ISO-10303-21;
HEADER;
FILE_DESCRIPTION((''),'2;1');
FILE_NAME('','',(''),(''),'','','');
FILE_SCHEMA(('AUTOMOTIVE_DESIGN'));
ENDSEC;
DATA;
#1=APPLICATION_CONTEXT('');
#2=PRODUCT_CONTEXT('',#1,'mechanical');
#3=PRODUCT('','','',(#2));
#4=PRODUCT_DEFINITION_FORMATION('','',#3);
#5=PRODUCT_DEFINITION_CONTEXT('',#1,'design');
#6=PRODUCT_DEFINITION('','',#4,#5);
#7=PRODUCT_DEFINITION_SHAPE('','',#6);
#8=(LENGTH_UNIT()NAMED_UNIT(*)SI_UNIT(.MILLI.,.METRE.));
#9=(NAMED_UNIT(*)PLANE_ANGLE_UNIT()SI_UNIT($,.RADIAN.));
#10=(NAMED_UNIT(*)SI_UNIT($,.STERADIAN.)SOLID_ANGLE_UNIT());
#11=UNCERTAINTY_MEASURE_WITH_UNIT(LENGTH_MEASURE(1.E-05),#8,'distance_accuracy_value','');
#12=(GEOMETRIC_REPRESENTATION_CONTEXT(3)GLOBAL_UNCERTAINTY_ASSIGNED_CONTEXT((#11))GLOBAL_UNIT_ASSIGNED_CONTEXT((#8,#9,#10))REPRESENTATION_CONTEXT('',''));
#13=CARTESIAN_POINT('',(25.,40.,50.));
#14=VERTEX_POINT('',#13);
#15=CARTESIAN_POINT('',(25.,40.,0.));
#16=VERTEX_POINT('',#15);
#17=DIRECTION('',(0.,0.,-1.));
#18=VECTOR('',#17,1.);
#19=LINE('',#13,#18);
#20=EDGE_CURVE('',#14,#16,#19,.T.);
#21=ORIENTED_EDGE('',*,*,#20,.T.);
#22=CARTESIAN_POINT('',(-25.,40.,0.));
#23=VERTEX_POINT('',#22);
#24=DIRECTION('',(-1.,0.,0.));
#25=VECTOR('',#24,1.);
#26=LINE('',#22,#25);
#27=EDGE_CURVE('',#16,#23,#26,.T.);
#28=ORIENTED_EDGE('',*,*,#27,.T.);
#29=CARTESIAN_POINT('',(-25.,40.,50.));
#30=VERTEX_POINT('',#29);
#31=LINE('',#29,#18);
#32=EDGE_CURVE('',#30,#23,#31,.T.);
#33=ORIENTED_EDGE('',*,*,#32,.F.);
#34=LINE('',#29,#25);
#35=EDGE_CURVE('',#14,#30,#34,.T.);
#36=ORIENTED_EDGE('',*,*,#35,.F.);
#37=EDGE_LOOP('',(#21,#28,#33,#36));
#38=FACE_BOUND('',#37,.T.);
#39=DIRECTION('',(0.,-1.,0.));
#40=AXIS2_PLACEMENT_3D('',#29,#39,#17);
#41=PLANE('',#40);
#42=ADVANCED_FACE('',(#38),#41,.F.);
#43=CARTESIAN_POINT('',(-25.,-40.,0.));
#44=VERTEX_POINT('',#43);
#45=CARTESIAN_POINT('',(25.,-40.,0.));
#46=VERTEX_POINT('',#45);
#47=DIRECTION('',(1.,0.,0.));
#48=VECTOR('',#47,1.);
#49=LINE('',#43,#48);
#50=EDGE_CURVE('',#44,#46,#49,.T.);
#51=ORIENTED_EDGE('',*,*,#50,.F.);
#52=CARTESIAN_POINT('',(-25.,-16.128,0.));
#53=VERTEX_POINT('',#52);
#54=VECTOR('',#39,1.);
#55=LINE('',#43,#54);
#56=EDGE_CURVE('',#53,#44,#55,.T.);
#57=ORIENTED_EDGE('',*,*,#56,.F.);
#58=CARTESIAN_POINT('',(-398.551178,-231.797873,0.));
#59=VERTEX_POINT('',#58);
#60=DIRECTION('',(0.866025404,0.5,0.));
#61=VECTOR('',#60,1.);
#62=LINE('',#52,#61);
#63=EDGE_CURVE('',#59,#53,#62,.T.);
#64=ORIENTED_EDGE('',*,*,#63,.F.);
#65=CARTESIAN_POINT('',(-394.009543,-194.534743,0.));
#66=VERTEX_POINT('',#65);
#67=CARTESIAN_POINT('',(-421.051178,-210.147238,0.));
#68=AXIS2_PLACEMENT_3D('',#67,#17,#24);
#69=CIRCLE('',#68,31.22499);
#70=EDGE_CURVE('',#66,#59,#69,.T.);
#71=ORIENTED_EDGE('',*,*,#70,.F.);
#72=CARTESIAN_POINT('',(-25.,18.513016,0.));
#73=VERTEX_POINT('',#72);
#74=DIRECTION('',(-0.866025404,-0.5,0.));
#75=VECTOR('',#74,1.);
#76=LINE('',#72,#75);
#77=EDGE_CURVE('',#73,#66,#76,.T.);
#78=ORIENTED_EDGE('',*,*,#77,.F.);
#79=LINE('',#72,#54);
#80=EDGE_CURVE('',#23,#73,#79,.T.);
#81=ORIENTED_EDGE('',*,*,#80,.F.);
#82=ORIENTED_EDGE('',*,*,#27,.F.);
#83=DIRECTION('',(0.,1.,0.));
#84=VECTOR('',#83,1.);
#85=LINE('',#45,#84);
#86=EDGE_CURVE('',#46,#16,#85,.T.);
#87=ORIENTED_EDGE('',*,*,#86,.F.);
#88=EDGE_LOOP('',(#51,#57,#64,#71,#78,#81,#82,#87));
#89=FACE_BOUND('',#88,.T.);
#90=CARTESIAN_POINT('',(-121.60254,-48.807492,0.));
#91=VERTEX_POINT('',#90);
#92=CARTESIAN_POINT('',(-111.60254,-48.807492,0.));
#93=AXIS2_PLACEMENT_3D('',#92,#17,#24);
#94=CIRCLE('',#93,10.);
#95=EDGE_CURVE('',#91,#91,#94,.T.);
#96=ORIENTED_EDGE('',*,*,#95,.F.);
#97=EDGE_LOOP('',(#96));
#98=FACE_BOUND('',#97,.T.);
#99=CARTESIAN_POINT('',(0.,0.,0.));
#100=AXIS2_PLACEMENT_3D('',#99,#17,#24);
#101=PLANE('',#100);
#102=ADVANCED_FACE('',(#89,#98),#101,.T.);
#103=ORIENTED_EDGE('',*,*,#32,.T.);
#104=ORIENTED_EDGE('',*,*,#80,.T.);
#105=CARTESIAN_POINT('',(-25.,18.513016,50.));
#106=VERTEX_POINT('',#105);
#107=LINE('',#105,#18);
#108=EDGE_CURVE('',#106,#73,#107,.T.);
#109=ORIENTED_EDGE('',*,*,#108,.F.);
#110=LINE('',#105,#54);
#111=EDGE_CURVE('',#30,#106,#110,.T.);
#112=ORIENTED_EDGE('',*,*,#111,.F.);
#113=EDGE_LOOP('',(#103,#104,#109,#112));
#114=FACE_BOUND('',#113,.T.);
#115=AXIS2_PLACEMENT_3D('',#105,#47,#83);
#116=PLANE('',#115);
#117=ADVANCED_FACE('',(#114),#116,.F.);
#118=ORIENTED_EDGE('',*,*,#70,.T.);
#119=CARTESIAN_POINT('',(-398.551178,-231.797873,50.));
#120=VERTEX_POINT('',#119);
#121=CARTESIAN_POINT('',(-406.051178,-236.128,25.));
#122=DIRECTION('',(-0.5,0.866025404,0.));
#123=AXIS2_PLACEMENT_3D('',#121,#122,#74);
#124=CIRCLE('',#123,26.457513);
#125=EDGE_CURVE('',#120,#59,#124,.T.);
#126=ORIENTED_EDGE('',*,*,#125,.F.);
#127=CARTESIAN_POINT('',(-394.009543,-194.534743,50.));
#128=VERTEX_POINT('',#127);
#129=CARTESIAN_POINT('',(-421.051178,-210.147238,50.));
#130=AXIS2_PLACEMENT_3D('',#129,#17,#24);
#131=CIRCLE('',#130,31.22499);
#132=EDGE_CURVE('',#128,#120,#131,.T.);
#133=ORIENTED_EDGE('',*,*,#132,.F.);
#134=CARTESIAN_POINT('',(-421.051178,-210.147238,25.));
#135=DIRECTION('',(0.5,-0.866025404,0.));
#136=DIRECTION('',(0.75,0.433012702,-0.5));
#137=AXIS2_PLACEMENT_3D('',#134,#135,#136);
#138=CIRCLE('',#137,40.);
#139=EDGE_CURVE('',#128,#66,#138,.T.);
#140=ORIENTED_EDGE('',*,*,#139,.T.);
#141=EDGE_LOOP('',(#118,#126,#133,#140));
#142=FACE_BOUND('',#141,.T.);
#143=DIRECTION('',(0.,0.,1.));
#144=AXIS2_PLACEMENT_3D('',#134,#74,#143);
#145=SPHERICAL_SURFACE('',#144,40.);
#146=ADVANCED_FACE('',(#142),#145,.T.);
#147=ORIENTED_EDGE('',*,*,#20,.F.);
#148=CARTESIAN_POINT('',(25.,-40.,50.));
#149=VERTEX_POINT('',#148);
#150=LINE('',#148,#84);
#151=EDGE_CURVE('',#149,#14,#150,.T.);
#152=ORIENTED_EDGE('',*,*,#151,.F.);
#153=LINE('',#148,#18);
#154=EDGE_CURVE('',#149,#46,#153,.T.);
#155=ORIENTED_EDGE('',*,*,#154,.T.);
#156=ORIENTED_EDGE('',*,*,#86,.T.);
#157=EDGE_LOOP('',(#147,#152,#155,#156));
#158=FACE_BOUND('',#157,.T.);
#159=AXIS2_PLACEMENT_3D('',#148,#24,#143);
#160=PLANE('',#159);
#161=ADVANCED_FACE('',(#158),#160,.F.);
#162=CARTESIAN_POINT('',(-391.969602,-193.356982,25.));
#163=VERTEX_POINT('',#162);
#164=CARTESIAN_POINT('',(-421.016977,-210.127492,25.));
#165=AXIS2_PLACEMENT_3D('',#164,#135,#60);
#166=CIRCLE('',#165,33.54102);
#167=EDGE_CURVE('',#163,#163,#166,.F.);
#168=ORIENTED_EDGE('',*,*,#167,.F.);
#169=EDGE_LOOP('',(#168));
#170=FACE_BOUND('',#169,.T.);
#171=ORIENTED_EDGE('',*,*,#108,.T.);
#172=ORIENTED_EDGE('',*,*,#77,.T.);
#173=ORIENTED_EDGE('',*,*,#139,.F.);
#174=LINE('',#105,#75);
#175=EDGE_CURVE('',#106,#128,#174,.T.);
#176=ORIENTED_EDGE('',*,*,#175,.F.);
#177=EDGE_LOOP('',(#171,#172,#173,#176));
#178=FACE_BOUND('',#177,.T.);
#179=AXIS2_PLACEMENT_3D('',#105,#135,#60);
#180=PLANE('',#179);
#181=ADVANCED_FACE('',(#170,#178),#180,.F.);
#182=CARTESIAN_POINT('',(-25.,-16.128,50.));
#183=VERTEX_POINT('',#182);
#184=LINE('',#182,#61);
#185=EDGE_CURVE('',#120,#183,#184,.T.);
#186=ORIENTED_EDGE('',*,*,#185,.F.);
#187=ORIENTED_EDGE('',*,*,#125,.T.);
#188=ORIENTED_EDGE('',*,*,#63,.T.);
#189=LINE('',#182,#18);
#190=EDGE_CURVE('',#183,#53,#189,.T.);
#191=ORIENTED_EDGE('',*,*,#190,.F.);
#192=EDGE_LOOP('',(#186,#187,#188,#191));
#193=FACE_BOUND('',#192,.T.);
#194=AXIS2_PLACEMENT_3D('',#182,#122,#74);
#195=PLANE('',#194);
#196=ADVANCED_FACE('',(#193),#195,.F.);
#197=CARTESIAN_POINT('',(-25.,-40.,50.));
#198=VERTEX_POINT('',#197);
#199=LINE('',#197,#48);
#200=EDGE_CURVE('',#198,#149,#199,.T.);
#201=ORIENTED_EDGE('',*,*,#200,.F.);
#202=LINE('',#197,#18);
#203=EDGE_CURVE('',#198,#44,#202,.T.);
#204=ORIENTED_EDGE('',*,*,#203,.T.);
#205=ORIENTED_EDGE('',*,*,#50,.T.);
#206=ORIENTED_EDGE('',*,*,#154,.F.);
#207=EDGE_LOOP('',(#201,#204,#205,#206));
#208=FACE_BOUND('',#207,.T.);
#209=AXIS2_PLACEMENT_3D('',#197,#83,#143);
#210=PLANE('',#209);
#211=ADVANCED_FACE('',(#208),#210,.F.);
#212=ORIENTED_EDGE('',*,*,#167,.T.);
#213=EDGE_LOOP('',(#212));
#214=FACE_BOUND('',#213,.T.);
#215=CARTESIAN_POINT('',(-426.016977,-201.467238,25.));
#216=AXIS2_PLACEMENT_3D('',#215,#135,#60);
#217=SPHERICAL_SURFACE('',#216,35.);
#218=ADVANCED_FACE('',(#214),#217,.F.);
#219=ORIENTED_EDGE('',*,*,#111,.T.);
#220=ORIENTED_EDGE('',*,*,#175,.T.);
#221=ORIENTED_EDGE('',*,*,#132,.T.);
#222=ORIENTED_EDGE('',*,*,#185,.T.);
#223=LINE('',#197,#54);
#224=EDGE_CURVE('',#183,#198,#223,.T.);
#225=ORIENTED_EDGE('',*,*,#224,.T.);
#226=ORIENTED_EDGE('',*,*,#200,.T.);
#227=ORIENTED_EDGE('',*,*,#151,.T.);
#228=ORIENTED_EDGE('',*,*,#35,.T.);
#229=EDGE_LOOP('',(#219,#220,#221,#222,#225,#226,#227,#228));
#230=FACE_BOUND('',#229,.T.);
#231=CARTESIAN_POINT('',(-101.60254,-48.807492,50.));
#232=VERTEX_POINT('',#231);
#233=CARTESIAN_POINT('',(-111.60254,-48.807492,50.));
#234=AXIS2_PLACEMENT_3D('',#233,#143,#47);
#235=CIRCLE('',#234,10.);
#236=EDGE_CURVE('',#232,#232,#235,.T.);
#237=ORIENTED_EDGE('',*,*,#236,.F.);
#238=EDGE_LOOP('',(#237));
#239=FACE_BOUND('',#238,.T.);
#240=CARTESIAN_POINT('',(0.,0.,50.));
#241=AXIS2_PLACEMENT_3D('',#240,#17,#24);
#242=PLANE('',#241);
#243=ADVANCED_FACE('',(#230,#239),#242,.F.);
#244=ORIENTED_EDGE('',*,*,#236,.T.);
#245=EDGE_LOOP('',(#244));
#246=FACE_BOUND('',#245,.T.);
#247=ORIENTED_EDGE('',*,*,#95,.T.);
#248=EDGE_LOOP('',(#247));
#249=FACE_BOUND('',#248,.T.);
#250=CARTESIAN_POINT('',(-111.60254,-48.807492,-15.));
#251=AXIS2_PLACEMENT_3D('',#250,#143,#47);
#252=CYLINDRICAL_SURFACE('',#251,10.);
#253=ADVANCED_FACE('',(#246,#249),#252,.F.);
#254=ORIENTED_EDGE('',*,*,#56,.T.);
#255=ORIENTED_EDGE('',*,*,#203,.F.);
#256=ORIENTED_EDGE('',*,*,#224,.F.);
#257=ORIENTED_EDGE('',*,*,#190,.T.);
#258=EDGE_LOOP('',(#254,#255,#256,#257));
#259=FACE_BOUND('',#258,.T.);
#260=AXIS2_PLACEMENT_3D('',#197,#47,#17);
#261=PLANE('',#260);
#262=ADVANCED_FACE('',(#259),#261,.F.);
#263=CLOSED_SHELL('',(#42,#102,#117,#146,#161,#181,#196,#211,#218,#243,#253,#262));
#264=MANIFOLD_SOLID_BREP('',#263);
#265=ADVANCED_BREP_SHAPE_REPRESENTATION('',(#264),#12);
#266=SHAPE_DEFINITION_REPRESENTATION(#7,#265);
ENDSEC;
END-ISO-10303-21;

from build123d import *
from build123d.topology import SkipClean

# Parameters (mm, degrees)
BOSS_EXTRUDE1_DEPTH          = 50
CUT_REVOLVE1_ANGLE           = 90
CUT_REVOLVE1_OTHER_WAY_ANGLE = 90
SKETCH5_R                    = 10
CUT_EXTRUDE1_DEPTH           = 524.883590244


# Read off the part's stored shape, not the designer's step: Revolve1
with BuildPart() as part:
    # Sketch1 → Boss-Extrude1 (new body)
    with BuildSketch(Plane.XY):
        Polygon((-25, -16.128), (-406.051177665, -236.128), (-421.051177665, -210.147237886), (-25, 18.513016151), (-25, 40), (25, 40), (25, -40), (-25, -40), align=None)
    extrude(amount=BOSS_EXTRUDE1_DEPTH)

    # Revolve1 outline → Revolve1 (revolve)
    with BuildSketch(Plane(origin=(-406.784806521, -234.857317547, 25), x_dir=(0.8660254037844362, 0.5000000000000042, 0), z_dir=(0, 0, -1))):
        with BuildLine():
            Line((0, 11.467257712), (0, -28.532742288))
            Line((0, -28.532742288), (40, -28.532742288))
            ThreePointArc((40, -28.532742288), (28.284271247, -0.24847104), (0, 11.467257712))
        make_face()
    revolve(axis=Axis((-406.784806521, -234.857317547, 25), (0.5000000000000042, -0.8660254037844362, 0)))

    # Sketch4 → Cut-Revolve1 (revolve, cut)
    with BuildSketch(Plane.XY.offset(25)):
        with BuildLine():
            Line((-395.706087523, -183.967237886), (-456.327865788, -218.967237886))
            ThreePointArc((-456.327865788, -218.967237886), (-408.516976655, -231.778127019), (-395.706087523, -183.967237886))
        make_face()
    revolve(axis=Axis((-395.706087523, -183.967237886, 25), (-0.8660254037844387, -0.49999999999999994, 0)), revolution_arc=CUT_REVOLVE1_ANGLE, mode=Mode.SUBTRACT)

    # Sketch4 → Cut-Revolve1 other way (revolve, cut)
    with SkipClean():  # the faces are left unmerged after this step: merging them gives an invalid solid
        with BuildSketch(Plane.XY.offset(25)):
            with BuildLine():
                Line((-395.706087523, -183.967237886), (-456.327865788, -218.967237886))
                ThreePointArc((-456.327865788, -218.967237886), (-408.516976655, -231.778127019), (-395.706087523, -183.967237886))
            make_face()
        revolve(axis=Axis((-395.706087523, -183.967237886, 25), (0.8660254037844387, 0.49999999999999994, 0)), revolution_arc=CUT_REVOLVE1_OTHER_WAY_ANGLE, mode=Mode.SUBTRACT)

    # Sketch5 → Cut-Extrude1 (cut, through all)
    with SkipClean():  # the faces are left unmerged after this step: merging them gives an invalid solid
        with BuildSketch(Plane.XY.offset(50)):
            with Locations((-111.602540378, -48.807491924)):
                Circle(SKETCH5_R)
        extrude(amount=-CUT_EXTRUDE1_DEPTH, mode=Mode.SUBTRACT)


solid = part.part
